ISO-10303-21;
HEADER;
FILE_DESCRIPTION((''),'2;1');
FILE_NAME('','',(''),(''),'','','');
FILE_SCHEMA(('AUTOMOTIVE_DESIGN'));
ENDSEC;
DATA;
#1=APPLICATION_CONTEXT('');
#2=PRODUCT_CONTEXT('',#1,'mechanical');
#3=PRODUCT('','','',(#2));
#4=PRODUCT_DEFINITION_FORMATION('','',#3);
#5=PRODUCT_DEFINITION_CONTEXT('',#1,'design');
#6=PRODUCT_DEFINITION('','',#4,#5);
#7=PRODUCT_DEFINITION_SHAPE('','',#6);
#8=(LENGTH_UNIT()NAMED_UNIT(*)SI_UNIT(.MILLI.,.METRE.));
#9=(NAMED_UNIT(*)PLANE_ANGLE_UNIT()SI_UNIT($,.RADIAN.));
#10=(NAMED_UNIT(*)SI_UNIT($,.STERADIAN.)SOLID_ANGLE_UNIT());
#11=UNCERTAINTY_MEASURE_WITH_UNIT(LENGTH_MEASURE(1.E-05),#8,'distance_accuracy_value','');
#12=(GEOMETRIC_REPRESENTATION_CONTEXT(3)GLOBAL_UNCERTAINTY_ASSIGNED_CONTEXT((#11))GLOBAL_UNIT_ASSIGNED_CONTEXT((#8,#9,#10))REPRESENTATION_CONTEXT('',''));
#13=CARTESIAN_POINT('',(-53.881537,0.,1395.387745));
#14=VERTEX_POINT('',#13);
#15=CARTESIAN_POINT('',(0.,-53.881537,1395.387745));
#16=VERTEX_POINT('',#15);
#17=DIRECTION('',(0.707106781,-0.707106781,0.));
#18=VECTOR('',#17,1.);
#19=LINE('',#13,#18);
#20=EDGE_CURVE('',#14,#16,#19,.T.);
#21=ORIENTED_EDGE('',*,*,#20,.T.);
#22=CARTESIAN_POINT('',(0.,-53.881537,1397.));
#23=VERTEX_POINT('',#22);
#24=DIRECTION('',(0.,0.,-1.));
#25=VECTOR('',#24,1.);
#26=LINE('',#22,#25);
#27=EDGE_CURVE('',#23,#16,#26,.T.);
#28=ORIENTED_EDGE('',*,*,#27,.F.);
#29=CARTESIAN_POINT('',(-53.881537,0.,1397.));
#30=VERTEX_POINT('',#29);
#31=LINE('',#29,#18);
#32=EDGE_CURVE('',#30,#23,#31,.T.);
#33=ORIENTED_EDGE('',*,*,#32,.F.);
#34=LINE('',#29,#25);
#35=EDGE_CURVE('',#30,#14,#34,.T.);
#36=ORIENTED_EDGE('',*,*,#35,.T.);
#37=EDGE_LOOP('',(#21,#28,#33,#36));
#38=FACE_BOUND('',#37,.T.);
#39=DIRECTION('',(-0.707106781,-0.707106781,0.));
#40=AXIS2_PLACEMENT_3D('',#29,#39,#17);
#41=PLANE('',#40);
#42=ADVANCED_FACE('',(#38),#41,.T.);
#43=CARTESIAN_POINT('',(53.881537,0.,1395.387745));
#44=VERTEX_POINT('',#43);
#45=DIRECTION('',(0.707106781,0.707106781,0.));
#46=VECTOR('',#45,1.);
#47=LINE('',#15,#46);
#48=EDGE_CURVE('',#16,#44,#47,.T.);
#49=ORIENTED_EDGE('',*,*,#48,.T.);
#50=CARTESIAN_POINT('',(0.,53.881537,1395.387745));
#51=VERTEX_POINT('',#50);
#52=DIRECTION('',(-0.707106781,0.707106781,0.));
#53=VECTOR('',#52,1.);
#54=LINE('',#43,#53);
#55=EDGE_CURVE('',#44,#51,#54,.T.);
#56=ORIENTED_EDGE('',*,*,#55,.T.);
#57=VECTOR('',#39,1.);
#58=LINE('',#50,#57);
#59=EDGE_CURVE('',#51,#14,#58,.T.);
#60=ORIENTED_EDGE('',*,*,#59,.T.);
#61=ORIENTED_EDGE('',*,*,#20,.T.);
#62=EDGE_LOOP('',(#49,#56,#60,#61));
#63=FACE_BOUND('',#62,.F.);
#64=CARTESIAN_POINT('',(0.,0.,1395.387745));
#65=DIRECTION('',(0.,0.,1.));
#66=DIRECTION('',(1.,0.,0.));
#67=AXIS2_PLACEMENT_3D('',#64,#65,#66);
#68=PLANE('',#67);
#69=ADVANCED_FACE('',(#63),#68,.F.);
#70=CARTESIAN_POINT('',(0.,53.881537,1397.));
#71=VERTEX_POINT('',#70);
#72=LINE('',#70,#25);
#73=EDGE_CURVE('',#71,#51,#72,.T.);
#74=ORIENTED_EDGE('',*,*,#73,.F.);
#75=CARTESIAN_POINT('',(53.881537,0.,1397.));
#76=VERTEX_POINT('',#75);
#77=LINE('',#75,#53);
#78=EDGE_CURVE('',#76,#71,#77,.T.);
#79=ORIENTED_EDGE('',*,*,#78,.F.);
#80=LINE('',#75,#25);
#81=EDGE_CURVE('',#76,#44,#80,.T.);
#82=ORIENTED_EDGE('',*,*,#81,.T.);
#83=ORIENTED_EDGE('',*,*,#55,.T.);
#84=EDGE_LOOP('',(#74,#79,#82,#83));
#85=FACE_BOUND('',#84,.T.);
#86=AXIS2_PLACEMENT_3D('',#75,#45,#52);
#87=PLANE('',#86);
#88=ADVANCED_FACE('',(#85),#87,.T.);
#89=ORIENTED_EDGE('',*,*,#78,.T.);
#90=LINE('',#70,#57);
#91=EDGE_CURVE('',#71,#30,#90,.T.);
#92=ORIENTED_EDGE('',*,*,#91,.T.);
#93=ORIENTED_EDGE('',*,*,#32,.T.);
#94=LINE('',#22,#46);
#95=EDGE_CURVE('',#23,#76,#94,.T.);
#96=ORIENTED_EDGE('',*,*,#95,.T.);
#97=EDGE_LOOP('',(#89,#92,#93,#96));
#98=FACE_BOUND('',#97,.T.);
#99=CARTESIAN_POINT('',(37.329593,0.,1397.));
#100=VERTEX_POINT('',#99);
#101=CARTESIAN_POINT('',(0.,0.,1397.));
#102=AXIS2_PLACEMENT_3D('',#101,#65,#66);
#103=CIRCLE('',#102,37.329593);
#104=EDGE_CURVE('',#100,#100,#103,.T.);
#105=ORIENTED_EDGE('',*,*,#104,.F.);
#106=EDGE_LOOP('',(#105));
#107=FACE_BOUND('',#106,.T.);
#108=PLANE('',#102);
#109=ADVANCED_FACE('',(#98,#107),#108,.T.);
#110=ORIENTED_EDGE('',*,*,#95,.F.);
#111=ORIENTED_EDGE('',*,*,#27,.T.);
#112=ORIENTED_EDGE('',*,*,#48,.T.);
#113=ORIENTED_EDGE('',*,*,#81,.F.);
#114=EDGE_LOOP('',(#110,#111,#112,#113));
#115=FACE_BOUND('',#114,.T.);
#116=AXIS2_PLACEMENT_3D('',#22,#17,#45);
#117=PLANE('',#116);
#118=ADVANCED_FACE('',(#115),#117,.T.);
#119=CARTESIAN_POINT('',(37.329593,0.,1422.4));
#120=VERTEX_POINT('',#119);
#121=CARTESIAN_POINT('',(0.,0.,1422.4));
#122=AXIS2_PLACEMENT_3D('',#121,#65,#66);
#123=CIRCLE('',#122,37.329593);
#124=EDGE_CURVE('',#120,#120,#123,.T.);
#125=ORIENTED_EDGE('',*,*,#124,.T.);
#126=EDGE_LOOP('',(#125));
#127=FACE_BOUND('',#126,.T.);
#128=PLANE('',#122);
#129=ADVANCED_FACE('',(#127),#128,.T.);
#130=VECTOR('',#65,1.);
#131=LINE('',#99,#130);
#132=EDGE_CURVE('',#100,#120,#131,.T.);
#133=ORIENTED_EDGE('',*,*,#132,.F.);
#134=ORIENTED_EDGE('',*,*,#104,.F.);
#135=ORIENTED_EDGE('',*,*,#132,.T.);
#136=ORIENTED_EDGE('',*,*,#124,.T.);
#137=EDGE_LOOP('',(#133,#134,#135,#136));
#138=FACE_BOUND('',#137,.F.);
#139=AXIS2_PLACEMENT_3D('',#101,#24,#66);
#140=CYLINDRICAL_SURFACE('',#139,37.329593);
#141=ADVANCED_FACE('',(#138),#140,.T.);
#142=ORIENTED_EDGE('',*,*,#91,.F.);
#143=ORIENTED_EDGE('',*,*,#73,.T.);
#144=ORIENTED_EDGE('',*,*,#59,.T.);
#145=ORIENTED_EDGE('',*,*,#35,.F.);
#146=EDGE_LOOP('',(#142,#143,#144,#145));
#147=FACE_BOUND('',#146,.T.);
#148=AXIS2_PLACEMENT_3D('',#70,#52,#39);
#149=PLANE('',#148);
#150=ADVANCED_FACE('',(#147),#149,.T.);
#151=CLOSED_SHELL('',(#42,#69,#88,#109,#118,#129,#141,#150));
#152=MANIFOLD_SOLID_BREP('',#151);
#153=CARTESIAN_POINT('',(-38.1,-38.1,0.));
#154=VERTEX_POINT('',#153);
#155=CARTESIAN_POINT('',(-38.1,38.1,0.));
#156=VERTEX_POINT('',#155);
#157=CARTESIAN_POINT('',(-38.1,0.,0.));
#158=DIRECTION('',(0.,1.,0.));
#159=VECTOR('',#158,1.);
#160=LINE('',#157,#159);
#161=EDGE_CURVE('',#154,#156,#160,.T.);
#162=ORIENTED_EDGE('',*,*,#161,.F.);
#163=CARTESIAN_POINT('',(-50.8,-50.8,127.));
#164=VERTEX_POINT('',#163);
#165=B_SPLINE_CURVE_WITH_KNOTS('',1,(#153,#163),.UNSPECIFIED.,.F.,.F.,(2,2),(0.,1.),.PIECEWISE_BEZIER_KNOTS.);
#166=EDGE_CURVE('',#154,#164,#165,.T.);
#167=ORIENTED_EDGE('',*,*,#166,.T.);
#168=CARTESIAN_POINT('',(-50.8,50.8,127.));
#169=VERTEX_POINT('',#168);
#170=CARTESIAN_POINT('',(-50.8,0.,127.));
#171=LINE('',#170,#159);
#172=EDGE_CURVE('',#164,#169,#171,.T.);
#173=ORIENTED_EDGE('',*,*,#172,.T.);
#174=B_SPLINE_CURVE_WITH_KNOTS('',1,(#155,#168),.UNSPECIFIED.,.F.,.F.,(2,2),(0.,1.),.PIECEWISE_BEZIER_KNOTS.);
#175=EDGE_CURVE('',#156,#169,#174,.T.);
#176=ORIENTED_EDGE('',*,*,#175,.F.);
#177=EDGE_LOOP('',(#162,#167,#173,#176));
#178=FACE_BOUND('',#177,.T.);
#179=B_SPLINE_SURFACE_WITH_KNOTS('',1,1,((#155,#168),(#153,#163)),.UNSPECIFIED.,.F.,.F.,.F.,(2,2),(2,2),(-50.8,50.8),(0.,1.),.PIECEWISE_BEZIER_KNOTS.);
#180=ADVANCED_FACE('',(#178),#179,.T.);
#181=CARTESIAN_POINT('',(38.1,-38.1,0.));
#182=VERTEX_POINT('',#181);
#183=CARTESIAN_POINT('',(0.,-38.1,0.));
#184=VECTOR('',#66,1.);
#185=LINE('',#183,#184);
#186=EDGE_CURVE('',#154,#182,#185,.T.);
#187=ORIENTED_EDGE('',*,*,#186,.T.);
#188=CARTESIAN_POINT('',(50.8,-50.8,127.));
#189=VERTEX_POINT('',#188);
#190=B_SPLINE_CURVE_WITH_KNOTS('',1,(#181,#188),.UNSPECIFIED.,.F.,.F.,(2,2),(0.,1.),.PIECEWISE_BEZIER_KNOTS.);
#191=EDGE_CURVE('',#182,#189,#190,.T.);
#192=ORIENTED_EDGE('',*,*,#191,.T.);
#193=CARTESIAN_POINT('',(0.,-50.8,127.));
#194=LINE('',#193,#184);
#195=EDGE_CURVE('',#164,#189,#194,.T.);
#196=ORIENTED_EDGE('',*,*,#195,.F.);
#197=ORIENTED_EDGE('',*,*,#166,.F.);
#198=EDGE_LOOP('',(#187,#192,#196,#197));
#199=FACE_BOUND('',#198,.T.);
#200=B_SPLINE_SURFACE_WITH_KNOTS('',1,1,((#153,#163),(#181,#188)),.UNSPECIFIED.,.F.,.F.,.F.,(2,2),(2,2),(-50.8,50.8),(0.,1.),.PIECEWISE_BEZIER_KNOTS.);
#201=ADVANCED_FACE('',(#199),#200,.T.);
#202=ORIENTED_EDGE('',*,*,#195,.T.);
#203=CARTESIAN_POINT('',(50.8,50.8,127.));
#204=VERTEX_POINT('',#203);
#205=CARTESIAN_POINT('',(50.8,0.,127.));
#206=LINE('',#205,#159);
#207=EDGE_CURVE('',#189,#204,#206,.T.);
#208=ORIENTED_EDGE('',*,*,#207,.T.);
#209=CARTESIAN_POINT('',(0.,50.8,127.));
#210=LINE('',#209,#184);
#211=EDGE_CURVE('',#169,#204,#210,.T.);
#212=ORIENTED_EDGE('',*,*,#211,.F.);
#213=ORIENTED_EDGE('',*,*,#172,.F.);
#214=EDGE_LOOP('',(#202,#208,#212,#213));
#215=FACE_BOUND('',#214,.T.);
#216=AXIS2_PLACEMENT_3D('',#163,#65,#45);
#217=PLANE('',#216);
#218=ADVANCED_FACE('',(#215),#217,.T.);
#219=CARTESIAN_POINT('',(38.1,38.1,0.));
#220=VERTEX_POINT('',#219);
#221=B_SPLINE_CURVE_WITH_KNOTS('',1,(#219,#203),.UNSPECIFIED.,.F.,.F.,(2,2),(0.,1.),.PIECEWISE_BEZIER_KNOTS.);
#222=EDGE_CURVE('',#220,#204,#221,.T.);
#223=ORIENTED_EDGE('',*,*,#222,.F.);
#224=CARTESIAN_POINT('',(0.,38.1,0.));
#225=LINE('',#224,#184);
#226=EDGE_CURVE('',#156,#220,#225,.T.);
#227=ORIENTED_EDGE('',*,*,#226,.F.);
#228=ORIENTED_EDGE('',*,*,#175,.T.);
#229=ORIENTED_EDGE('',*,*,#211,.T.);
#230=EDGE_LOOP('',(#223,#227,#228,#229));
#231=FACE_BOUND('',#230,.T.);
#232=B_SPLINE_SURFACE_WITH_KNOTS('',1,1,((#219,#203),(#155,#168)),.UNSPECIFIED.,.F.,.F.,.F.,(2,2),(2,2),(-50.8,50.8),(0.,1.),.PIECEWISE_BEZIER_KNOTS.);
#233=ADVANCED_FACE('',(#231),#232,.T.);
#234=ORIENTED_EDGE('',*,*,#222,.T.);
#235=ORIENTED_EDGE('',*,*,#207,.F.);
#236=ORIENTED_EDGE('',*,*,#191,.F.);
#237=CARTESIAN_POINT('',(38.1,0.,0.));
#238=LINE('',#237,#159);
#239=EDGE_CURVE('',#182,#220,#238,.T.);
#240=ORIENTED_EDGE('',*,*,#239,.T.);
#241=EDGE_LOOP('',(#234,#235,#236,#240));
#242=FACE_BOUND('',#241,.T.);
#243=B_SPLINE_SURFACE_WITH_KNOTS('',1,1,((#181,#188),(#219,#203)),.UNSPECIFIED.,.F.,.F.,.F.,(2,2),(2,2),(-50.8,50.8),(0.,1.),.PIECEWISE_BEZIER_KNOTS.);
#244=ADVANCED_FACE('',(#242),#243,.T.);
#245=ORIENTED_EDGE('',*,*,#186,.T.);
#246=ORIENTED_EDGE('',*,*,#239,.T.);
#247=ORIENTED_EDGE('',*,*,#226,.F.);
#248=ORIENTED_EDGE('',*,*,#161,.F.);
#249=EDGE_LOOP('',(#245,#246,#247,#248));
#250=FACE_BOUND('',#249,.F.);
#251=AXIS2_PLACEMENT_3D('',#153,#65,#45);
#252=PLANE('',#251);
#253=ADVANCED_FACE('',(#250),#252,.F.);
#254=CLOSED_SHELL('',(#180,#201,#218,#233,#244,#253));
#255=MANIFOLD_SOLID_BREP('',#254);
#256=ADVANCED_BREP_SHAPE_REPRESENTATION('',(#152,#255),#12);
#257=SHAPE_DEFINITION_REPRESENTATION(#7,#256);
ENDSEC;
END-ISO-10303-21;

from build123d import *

# Parameters (mm, degrees)
F2_W      = 76.2
F2_H      = 76.2
F3_W      = 101.6
F3_H      = 101.6
F15_DEPTH = 1.6122553498
F5_R      = 37.3295934584
F16_DEPTH = 25.4


# Not quite as in the source:
# - the program builds the solid bodies; features that only make, move or delete a surface that nothing else refers to are left out


with BuildPart() as f14:
    # F2 (on Top) → F14 section 0
    with BuildSketch(Plane.XY):
        Rectangle(F2_W, F2_H)
    # F3 (on offset) → F14 section 1
    with BuildSketch(Plane.XY.offset(127)):
        Rectangle(F3_W, F3_H)
    loft()


with BuildPart() as f15:
    # F4 (on offset) → F15 (new body)
    with BuildSketch(Plane.XY.offset(1397)):
        Polygon((0, 53.8815367264), (-53.8815367264, 0), (0, -53.8815367264), (53.8815367264, 0), align=None)
    extrude(amount=-F15_DEPTH)

    # F5 (on offset) → F16 (join)
    with BuildSketch(Plane.XY.offset(1397)):
        Circle(F5_R)
    extrude(amount=F16_DEPTH)


solid = Compound([f14.part, f15.part])
